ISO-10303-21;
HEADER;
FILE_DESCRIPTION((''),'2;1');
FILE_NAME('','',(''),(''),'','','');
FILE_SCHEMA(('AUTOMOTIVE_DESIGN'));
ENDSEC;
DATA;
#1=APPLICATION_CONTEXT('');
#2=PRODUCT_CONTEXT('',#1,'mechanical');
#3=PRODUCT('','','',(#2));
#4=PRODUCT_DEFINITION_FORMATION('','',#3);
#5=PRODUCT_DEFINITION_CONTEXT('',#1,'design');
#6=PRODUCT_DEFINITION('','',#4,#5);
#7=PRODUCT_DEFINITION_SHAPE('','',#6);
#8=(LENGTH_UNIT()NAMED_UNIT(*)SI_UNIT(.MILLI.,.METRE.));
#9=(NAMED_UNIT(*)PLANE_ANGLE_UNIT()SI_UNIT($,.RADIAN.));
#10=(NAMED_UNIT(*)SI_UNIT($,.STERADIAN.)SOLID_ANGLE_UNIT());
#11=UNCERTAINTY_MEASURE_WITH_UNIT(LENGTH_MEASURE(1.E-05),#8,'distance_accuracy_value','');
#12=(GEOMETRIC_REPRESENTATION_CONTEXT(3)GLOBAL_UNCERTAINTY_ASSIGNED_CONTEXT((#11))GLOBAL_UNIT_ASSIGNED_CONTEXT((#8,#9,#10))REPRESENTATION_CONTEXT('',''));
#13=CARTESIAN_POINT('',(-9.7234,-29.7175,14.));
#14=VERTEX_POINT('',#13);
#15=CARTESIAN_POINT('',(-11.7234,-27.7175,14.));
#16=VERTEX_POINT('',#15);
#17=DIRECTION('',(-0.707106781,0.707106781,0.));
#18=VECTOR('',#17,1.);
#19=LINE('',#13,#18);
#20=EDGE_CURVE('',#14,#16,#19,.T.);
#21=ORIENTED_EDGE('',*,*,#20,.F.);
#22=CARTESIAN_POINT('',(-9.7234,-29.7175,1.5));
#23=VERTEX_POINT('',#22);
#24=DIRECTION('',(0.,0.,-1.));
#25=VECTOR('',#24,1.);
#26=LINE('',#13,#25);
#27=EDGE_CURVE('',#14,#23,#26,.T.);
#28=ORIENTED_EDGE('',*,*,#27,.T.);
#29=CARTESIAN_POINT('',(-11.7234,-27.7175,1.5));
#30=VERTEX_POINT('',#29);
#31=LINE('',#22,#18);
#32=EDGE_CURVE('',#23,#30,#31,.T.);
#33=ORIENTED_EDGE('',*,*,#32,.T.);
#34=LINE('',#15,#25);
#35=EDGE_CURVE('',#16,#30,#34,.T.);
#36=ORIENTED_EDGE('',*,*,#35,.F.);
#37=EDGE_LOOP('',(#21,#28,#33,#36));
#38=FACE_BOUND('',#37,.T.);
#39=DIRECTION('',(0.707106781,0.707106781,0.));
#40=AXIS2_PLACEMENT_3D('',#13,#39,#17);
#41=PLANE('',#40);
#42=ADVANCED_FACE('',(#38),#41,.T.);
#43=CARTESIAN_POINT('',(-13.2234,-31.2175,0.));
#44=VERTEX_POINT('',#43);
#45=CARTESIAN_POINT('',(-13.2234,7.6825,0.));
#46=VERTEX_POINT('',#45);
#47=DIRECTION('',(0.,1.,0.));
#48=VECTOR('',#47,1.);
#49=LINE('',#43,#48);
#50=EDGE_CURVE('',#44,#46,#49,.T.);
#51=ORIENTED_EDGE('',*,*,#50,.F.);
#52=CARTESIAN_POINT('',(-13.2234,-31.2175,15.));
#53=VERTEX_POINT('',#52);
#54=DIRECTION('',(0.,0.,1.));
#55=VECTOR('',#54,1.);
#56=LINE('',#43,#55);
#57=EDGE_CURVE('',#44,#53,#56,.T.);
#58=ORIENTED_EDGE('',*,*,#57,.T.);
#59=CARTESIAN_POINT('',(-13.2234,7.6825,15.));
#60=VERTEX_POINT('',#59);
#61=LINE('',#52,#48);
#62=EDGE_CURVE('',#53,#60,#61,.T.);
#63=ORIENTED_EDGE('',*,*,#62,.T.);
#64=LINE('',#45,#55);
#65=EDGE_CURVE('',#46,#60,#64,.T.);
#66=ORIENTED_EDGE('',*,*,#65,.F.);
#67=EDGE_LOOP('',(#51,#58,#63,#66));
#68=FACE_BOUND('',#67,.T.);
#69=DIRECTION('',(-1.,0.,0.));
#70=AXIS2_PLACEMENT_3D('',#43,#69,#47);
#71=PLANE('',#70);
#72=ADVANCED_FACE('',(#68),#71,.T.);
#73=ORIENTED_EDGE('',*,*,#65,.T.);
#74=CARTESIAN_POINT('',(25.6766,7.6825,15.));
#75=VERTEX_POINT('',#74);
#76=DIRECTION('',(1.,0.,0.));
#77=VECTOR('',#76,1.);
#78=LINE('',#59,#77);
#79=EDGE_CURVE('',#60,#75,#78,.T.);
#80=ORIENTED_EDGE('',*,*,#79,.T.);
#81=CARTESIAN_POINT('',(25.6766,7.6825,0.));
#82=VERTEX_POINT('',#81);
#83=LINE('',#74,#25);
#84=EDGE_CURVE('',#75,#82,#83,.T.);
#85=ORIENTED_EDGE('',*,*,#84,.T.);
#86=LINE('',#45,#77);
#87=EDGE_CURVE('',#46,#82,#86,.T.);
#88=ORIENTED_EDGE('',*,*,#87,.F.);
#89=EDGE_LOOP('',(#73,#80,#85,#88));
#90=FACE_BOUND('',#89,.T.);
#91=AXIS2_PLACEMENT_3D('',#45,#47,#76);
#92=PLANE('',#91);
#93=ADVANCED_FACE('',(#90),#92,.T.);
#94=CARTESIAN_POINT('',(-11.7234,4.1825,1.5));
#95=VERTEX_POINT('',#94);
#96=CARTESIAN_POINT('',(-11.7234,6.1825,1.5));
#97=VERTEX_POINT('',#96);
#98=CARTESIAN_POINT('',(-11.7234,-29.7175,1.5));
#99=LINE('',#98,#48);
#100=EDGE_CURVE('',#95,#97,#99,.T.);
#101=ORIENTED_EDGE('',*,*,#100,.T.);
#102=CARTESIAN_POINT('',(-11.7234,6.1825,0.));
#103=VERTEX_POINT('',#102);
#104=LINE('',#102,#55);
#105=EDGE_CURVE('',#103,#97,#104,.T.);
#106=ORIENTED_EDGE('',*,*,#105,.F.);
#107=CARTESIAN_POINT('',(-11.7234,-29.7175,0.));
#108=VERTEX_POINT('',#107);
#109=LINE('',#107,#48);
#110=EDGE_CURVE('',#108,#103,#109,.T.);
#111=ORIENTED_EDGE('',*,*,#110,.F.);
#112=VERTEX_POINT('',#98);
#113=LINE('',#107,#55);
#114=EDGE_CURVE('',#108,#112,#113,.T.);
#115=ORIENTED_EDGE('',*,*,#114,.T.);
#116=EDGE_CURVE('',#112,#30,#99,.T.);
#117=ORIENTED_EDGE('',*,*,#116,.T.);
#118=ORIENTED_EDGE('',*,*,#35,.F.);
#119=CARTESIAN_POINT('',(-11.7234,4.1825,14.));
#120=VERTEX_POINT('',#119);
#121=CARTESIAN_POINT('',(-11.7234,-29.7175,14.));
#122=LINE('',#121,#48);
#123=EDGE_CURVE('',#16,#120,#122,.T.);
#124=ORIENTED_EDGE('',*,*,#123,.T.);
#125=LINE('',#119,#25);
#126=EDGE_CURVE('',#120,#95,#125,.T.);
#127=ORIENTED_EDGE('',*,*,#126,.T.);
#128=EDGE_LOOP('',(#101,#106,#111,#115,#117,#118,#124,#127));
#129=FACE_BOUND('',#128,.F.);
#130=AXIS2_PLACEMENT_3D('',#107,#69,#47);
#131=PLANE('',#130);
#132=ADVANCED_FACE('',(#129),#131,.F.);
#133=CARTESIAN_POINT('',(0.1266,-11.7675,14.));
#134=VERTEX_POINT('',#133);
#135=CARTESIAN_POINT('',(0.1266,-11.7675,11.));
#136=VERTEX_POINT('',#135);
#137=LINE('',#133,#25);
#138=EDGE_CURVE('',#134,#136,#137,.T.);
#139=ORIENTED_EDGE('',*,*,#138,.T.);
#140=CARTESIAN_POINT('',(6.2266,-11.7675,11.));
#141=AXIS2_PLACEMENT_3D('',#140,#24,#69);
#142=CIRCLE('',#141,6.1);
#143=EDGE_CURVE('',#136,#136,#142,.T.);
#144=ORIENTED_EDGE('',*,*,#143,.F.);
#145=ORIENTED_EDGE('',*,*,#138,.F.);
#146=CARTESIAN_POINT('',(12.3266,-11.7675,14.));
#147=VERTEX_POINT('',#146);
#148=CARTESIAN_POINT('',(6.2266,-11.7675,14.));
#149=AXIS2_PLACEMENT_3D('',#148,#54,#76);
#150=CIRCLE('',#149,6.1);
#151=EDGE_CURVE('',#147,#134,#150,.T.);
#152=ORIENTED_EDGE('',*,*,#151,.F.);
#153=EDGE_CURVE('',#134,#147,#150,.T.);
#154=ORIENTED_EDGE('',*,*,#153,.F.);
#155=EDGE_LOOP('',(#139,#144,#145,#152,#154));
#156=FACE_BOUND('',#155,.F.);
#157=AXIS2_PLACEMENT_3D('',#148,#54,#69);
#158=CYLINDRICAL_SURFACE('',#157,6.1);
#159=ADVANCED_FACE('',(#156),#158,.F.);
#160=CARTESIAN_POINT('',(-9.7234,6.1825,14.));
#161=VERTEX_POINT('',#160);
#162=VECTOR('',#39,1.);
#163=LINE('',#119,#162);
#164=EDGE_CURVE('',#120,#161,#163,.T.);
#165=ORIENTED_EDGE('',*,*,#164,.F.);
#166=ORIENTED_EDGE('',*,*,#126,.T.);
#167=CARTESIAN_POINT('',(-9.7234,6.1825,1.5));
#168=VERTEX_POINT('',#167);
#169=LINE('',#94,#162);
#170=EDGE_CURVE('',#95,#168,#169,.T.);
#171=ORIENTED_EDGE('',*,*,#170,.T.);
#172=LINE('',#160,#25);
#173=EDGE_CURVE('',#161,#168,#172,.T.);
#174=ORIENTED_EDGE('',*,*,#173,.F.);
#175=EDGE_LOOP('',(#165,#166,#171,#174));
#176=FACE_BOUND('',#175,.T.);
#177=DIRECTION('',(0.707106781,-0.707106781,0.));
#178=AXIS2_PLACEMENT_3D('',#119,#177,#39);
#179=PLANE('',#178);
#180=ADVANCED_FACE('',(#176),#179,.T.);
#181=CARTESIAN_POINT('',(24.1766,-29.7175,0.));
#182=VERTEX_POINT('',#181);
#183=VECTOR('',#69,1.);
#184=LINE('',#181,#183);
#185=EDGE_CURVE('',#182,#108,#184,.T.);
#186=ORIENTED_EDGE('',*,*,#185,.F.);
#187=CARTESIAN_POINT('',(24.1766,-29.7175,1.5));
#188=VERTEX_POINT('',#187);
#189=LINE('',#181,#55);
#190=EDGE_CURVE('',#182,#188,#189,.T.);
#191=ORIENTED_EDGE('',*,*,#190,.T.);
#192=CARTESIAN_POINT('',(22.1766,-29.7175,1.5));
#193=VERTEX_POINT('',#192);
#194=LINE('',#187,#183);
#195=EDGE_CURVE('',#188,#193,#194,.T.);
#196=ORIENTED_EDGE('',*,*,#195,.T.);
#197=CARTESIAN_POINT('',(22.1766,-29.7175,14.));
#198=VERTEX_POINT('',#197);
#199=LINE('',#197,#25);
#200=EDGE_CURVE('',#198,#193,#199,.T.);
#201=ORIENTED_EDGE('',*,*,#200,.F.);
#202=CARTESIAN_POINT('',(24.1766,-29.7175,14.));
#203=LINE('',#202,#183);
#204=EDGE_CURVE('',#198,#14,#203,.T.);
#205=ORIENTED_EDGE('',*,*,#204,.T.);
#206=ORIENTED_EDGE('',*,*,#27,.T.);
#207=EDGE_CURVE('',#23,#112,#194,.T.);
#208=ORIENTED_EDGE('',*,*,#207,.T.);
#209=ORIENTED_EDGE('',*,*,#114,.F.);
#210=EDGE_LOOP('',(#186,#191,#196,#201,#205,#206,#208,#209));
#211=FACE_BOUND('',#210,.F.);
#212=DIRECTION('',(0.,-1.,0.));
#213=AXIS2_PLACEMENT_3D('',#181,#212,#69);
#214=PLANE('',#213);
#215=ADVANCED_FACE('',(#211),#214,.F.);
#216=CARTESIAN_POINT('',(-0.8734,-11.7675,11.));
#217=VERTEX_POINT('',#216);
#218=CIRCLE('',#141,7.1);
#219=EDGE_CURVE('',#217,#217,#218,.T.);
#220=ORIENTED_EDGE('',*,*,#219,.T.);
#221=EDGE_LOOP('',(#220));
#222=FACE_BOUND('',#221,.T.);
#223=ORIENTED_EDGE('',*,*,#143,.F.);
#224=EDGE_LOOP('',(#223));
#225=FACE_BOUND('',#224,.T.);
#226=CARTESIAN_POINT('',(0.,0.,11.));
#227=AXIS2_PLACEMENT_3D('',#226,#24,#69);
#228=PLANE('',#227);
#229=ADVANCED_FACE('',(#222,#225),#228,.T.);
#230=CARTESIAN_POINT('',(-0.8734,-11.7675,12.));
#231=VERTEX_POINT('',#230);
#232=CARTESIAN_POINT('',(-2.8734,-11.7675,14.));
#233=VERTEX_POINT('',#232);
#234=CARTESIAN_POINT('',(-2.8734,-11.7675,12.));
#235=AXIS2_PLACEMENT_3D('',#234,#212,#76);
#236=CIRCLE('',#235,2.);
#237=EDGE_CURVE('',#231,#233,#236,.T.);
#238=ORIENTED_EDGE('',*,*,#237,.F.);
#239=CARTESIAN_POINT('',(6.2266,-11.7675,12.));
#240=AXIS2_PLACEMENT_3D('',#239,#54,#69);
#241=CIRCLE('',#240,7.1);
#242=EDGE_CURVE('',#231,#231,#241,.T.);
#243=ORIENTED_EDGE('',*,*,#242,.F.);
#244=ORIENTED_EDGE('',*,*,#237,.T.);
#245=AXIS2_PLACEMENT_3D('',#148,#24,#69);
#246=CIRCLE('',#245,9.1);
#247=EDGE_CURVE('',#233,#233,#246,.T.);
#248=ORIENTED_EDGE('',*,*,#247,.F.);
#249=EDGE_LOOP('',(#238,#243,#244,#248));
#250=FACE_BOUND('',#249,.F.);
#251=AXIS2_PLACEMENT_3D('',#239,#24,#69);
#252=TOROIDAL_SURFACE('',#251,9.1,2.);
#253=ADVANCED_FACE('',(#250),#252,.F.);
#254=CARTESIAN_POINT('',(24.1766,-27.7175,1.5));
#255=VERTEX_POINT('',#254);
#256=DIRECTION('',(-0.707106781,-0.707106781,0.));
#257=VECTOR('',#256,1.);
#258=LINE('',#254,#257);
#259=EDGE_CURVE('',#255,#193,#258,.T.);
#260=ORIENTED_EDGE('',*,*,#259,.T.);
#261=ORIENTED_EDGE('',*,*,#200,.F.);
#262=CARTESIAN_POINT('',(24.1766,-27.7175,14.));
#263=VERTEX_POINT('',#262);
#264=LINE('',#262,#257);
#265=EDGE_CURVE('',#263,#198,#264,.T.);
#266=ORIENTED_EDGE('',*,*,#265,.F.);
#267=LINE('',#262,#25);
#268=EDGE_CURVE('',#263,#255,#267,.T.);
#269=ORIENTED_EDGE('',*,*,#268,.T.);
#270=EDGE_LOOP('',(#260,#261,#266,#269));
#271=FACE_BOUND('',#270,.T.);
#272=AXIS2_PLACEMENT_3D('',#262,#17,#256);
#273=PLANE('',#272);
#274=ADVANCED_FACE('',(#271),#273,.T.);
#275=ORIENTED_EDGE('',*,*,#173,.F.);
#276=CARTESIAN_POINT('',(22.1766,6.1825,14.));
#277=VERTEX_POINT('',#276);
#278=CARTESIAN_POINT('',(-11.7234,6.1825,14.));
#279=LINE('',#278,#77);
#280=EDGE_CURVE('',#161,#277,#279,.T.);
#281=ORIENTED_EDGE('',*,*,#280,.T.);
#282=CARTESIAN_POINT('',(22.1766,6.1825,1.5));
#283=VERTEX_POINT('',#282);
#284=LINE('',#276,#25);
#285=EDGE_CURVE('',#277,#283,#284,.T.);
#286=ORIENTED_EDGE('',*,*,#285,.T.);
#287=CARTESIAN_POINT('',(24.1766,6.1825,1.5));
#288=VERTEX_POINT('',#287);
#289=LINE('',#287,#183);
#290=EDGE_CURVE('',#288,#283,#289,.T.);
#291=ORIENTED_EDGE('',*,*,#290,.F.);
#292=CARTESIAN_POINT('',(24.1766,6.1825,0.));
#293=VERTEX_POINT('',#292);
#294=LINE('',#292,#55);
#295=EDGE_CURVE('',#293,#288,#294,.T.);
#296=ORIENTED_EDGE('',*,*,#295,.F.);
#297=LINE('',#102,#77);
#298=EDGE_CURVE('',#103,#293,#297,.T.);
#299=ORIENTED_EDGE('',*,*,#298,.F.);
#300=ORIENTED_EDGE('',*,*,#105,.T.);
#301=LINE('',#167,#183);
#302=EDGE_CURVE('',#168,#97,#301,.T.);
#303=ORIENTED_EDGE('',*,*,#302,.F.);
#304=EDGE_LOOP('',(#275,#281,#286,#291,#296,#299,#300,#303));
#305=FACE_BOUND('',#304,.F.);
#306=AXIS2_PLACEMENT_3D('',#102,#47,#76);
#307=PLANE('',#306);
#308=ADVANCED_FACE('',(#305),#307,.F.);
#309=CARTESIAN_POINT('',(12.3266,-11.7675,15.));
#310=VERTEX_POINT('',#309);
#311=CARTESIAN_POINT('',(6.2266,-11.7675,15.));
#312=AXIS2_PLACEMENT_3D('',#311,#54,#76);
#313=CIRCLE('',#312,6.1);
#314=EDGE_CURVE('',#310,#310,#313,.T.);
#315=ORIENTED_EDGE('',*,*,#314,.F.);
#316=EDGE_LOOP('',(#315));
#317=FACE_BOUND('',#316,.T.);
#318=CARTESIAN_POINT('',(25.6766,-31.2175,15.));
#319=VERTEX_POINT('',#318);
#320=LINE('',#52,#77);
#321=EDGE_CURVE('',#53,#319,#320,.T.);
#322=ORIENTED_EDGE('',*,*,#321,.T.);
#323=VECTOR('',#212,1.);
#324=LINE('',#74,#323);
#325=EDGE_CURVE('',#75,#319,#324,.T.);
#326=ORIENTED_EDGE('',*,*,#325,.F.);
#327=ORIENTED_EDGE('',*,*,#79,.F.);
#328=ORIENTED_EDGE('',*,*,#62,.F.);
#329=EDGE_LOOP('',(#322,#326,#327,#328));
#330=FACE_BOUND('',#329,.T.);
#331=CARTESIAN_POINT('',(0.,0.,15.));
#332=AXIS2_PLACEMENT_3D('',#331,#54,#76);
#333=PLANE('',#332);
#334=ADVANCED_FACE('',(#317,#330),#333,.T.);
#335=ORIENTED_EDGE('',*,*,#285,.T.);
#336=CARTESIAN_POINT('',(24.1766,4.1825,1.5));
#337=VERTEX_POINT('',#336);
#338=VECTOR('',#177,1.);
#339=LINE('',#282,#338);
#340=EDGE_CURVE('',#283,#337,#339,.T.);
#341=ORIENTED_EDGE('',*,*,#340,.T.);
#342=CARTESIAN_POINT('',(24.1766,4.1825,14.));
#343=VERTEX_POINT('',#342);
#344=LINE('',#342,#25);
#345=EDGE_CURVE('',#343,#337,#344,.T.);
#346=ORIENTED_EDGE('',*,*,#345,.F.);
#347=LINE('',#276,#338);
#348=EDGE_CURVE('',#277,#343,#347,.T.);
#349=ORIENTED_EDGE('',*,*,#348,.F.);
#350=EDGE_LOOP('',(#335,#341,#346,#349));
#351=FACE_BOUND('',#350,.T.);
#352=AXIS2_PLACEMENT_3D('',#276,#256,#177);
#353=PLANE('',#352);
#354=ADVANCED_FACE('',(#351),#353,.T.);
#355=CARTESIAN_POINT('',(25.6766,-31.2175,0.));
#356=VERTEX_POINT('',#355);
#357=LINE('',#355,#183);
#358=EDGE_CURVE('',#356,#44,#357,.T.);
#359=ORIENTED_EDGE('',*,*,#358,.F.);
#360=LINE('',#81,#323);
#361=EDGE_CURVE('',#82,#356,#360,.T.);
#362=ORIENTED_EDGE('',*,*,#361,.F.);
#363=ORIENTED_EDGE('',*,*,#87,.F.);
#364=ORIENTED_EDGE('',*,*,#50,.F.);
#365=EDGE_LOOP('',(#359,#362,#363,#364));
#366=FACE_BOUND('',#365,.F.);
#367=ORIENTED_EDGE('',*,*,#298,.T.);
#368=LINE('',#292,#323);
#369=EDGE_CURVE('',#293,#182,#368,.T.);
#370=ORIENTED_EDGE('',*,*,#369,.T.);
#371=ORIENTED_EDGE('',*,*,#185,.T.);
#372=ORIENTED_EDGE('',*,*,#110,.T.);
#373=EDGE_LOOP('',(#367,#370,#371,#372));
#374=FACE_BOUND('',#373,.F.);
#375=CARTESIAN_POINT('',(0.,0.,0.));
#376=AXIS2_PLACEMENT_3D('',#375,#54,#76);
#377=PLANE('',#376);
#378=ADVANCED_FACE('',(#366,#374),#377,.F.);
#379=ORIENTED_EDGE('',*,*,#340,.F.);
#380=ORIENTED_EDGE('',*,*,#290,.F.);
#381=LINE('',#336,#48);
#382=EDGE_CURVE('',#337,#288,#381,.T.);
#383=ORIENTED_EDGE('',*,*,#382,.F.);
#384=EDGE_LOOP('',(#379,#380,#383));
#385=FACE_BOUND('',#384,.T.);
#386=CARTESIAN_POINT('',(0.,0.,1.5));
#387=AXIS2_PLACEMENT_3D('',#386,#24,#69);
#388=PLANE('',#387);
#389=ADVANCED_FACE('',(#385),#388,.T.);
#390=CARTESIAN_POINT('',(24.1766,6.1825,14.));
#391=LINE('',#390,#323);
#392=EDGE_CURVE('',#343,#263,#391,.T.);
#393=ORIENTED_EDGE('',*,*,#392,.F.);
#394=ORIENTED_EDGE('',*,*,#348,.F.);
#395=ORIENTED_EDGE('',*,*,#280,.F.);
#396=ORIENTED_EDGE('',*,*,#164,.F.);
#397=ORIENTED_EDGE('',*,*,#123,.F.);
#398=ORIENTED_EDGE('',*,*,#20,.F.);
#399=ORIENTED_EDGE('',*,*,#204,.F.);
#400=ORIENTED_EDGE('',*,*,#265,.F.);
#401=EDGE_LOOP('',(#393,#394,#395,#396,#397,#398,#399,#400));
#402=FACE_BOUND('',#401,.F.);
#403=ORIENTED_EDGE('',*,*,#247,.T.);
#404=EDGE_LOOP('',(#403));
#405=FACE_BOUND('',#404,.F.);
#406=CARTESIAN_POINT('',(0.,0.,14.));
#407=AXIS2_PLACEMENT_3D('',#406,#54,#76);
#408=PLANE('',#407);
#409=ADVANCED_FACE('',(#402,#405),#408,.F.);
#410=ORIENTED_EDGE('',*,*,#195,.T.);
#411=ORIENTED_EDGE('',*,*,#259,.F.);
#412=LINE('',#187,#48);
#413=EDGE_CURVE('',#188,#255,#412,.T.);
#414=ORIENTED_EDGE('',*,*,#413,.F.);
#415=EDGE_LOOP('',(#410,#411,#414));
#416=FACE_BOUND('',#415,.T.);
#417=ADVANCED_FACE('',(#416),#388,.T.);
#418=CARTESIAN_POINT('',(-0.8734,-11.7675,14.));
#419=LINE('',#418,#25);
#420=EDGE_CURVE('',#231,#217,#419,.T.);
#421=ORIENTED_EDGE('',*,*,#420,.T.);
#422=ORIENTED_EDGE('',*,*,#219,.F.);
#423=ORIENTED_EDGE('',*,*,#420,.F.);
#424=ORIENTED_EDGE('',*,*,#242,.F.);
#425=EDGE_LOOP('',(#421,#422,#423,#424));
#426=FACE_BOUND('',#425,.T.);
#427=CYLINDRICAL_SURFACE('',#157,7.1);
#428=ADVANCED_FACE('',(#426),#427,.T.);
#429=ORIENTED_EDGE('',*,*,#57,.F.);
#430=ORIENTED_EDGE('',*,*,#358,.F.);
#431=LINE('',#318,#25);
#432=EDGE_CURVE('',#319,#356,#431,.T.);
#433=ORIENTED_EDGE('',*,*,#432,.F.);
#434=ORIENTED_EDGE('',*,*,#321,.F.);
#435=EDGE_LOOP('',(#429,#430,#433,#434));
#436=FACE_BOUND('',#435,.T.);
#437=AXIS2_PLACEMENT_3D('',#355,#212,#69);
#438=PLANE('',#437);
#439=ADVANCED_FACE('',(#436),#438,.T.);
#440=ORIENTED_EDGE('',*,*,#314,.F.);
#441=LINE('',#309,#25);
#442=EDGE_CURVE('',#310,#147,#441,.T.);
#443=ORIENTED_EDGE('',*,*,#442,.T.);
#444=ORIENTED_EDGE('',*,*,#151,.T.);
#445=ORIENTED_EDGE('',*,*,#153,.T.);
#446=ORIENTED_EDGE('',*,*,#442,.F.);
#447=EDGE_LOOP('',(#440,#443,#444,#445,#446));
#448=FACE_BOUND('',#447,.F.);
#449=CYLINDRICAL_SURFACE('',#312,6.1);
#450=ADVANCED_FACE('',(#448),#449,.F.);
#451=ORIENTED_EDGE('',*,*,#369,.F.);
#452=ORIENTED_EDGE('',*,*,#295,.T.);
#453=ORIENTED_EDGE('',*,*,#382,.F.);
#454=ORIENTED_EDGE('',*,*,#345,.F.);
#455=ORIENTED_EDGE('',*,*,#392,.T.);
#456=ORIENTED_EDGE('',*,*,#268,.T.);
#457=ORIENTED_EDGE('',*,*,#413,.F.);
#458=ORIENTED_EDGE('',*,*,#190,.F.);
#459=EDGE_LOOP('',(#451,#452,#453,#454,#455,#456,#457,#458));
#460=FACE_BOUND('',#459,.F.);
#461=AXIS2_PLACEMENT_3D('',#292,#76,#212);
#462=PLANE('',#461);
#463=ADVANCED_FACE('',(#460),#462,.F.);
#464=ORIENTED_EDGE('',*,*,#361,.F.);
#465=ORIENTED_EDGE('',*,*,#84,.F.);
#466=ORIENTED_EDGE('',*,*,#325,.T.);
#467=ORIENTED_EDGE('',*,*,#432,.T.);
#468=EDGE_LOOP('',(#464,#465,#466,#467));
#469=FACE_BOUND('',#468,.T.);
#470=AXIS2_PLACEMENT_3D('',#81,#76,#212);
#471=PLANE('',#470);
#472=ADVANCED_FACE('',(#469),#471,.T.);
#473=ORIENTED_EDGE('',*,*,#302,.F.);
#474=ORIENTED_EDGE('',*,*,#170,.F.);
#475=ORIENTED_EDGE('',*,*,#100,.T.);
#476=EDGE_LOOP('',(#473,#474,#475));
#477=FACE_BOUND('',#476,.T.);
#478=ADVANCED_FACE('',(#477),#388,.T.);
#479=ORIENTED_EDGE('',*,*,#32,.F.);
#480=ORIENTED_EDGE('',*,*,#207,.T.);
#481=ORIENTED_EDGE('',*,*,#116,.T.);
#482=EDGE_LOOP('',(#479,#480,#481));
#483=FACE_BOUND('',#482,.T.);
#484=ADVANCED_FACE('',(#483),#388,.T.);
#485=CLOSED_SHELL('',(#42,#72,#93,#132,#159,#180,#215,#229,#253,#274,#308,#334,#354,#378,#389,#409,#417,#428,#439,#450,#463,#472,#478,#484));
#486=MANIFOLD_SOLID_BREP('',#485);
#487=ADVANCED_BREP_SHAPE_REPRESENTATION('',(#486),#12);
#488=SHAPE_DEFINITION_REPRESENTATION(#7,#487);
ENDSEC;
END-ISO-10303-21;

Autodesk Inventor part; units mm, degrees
ref_plane "YZ Plane" through (0, 0, 0) normal (1, 0, 0) x (0, 1, 0)
ref_plane "XZ Plane" through (0, 0, 0) normal (0, 1, 0) x (-1, 0, 0)
ref_plane "XY Plane" through (0, 0, 0) normal (0, 0, 1) x (1, 0, 0)
sketch "Sketch1" plane through (0, 0, 0) normal (0, 0, 1) x (1, 0, 0)
  line L0 (-11.7234, 6.1825) -> (24.1766, 6.1825)
  line L1 (24.1766, 6.1825) -> (24.1766, -29.7175)
  line L2 (24.1766, -29.7175) -> (-11.7234, -29.7175)
  line L3 (-11.7234, -29.7175) -> (-11.7234, 6.1825)
  line L4 (-13.2234, 7.6825) -> (25.6766, 7.6825)
  line L5 (25.6766, 7.6825) -> (25.6766, -31.2175)
  line L6 (25.6766, -31.2175) -> (-13.2234, -31.2175)
  line L7 (-13.2234, -31.2175) -> (-13.2234, 7.6825)
  point P0 (0, 0)
  dimension "d0" = 35.9
  dimension "d1" = 35.9
  dimension "d2" = 38.9
  dimension "d3" = 38.9
  dimension "d4" = 1.5
  dimension "d5" = 1.5
extrude "Extrusion1" add sketch "Sketch1" along normal blind 14
sketch "Sketch2" plane through (0, 0, 14) normal (0, 0, 1) x (1, 0, 0)
  line L0 (-13.2234, -31.2175) -> (-13.2234, 7.6825) projected
  line L1 (-13.2234, -31.2175) -> (25.6766, -31.2175) projected
  line L2 (-13.2234, 7.6825) -> (25.6766, 7.6825)
  line L3 (25.6766, 7.6825) -> (25.6766, -31.2175)
  line L4 (25.6766, -31.2175) -> (-13.2234, -31.2175)
  line L5 (-13.2234, -31.2175) -> (-13.2234, 7.6825)
  point P0 (0, 0)
extrude "Extrusion2" add sketch "Sketch2" along normal blind 1
sketch "Sketch3" plane through (0, 0, 15) normal (0, 0, 1) x (1, 0, 0)
  circle A0 centre (6.2266, -11.7675) radius 6.1
  line L0 (-13.2234, 7.6825) -> (-13.2234, -31.2175) projected
  line L1 (-13.2234, -31.2175) -> (25.6766, -31.2175) projected
  point P0 (0, 0)
  dimension "d10" = 12.2
  dimension "d11" = 19.45
  dimension "d12" = 19.45
  dimension "d13" = 38.9
extrude "Extrusion3" cut sketch "Sketch3" against normal blind 1
sketch "Sketch4" plane through (0, 0, 14) normal (0, 0, -1) x (-1, 0, 0)
  circle A0 centre (-6.2266, -11.7675) radius 6.1 projected
  circle A1 centre (-6.2266, -11.7675) radius 7.1
  point P0 (0, 0)
  dimension "d16" = 14.2
extrude "Extrusion4" add sketch "Sketch4" along normal blind 3
fillet "Fillet1" radius 2 1 edges at (13.3266, -11.7675, 14)
sketch "Sketch5" plane through (0, 0, 14) normal (0, 0, -1) x (-1, 0, 0)
  line L0 (-24.1766, -29.7175) -> (11.7234, -29.7175) projected
  line L1 (11.7234, -29.7175) -> (9.7234, -29.7175)
  line L2 (9.7234, -29.7175) -> (11.7234, -27.7175)
  line L3 (11.7234, -29.7175) -> (11.7234, 6.1825) projected
  line L4 (11.7234, -27.7175) -> (11.7234, -29.7175)
  line L5 (11.7234, -29.7175) -> (11.7234, -27.7175)
  circle A0 centre (-6.2266, -11.7675) radius 6.1 projected
  line L6 (11.7234, 6.1825) -> (11.7234, 4.1825)
  line L7 (9.7234, 6.1825) -> (11.7234, 6.1825)
  line L8 (11.7234, 4.1825) -> (9.7234, 6.1825)
  line L9 (-24.1766, 6.1825) -> (-22.1766, 6.1825)
  line L10 (-24.1766, 4.1825) -> (-24.1766, 6.1825)
  line L11 (-22.1766, 6.1825) -> (-24.1766, 4.1825)
  line L12 (-24.1766, -29.7175) -> (-24.1766, -27.7175)
  line L13 (-22.1766, -29.7175) -> (-24.1766, -29.7175)
  line L14 (-24.1766, -27.7175) -> (-22.1766, -29.7175)
  point P0 (0, 0)
  dimension "d20" = 2
  dimension "d21" = 45
  dimension "d24" = 360
extrude "Extrusion5" add sketch "Sketch5" along normal blind 12.5 contours L12 L14 L0 | L2 L3 L0 | L8 L7 L3 | L9 L11 L10
equation "\"d11\" = 0.5 * d13"
equation "\"d12\" = 0.5 * d13"
properties part number "lupa_camera_mount"
